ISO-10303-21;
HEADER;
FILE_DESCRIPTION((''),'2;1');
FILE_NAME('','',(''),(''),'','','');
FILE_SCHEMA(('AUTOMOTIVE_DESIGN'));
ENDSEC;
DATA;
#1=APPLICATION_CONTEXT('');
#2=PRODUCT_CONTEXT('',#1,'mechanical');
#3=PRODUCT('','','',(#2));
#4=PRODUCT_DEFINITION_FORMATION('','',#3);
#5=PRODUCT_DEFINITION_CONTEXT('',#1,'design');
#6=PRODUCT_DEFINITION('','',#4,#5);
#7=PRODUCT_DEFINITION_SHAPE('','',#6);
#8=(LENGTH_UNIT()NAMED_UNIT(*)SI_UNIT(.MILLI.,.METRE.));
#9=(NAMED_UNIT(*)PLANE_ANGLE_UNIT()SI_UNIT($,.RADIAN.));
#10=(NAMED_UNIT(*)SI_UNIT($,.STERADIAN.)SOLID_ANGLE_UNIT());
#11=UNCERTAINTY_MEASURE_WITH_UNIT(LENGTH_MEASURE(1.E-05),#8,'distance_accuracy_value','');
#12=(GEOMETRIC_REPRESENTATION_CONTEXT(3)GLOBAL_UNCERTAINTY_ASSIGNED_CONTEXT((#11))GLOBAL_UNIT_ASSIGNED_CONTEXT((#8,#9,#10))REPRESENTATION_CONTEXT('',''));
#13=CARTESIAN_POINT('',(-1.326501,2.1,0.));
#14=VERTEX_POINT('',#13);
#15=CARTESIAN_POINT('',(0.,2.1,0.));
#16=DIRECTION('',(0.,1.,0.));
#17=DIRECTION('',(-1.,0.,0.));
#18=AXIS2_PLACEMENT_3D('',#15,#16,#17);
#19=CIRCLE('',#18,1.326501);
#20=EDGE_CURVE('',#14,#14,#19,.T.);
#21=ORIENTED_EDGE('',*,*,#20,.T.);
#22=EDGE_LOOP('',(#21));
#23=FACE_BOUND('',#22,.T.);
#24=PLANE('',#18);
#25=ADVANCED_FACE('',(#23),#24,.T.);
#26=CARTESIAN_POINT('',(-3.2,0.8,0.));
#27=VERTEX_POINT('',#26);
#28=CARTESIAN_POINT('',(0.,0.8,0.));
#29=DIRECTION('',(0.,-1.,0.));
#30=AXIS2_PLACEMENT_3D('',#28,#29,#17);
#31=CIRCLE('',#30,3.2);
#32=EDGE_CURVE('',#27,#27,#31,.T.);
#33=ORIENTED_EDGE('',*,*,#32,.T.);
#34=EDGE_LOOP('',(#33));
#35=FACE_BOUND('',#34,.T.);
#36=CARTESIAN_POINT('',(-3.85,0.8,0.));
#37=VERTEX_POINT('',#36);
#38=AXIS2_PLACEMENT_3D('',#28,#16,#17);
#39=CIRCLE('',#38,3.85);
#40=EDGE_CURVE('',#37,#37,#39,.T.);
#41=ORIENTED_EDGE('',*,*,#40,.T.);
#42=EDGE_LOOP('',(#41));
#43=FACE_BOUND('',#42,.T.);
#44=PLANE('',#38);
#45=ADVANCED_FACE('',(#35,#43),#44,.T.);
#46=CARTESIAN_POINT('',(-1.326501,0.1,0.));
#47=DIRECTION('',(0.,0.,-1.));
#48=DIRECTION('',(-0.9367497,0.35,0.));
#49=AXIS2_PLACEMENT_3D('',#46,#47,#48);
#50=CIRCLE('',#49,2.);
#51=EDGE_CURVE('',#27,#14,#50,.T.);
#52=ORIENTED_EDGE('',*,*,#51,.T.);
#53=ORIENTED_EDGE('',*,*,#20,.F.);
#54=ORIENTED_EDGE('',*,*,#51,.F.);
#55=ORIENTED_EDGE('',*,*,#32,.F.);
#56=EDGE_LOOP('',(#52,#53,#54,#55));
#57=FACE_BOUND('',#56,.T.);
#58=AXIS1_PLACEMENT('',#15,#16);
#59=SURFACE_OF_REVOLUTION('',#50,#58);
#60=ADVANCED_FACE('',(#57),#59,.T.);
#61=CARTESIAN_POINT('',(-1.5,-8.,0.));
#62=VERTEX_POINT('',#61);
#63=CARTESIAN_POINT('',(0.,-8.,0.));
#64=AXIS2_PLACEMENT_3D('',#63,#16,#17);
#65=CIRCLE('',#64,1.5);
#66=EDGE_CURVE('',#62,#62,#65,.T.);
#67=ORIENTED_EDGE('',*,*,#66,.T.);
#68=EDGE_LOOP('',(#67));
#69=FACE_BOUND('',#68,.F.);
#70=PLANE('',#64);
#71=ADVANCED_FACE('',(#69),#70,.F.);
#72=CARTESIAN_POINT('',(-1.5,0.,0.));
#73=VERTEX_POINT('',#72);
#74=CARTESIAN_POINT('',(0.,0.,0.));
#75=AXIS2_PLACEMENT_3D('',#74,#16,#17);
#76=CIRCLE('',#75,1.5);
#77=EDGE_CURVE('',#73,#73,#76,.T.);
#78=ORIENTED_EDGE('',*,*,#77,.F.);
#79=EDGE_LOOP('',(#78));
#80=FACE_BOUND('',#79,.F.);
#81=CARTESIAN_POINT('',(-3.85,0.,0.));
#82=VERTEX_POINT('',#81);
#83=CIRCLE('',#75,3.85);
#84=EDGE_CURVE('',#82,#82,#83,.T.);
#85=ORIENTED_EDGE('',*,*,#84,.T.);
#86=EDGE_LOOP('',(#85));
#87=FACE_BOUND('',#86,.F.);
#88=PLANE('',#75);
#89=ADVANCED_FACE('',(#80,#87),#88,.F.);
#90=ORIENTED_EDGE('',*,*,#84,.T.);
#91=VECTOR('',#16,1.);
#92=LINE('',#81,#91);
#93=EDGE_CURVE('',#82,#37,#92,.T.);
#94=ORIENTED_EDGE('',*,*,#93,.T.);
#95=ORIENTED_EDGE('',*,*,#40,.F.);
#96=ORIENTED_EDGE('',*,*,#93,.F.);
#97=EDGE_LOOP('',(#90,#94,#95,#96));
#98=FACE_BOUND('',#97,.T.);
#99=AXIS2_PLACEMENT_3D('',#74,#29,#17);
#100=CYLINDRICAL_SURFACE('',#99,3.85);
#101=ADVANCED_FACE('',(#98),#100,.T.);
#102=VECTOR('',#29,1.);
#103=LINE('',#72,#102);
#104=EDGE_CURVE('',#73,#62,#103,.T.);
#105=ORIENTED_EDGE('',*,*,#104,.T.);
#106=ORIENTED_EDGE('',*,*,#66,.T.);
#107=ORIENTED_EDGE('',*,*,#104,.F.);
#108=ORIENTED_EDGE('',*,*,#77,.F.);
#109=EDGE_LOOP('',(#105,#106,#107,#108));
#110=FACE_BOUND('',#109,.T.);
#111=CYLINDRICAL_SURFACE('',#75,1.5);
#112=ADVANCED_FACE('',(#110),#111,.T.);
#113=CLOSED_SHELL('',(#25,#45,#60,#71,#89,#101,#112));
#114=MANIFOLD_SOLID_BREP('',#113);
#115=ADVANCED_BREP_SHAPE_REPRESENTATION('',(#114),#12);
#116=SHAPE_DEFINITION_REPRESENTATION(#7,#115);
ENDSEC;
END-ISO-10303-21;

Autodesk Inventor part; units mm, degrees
ref_plane "YZ Plane" through (0, 0, 0) normal (1, 0, 0) x (0, 1, 0)
ref_plane "XZ Plane" through (0, 0, 0) normal (0, 1, 0) x (-1, 0, 0)
ref_plane "XY Plane" through (0, 0, 0) normal (0, 0, 1) x (1, 0, 0)
sketch "スケッチ1" plane through (0, 0, 0) normal (0, 1, 0) x (-1, 0, 0)
  circle A0 centre (0, 0) radius 3.85
  circle A1 centre (0, 0) radius 1.5
  circle A2 centre (0, 0) radius 3.2
  dimension "d0" = 7.7
  dimension "d1" = 3
  dimension "d6" = 6.4
extrude "押し出し1" add sketch "スケッチ1" against normal blind 8 contours A1
extrude "押し出し2" add sketch "スケッチ1" along normal blind 0.8 contours A0 | A1 | A2
extrude "押し出し3" add sketch "スケッチ1" along normal blind 2.1 contours A1 | A2
fillet "フィレット1" radius 2 1 edges at (3.2, 2.1, 0)
thread "ねじ1" size "M3x0.5" class "6g" standard "ANSI Metric M Profile" full length
properties part number "ClampHorn_Screw"
